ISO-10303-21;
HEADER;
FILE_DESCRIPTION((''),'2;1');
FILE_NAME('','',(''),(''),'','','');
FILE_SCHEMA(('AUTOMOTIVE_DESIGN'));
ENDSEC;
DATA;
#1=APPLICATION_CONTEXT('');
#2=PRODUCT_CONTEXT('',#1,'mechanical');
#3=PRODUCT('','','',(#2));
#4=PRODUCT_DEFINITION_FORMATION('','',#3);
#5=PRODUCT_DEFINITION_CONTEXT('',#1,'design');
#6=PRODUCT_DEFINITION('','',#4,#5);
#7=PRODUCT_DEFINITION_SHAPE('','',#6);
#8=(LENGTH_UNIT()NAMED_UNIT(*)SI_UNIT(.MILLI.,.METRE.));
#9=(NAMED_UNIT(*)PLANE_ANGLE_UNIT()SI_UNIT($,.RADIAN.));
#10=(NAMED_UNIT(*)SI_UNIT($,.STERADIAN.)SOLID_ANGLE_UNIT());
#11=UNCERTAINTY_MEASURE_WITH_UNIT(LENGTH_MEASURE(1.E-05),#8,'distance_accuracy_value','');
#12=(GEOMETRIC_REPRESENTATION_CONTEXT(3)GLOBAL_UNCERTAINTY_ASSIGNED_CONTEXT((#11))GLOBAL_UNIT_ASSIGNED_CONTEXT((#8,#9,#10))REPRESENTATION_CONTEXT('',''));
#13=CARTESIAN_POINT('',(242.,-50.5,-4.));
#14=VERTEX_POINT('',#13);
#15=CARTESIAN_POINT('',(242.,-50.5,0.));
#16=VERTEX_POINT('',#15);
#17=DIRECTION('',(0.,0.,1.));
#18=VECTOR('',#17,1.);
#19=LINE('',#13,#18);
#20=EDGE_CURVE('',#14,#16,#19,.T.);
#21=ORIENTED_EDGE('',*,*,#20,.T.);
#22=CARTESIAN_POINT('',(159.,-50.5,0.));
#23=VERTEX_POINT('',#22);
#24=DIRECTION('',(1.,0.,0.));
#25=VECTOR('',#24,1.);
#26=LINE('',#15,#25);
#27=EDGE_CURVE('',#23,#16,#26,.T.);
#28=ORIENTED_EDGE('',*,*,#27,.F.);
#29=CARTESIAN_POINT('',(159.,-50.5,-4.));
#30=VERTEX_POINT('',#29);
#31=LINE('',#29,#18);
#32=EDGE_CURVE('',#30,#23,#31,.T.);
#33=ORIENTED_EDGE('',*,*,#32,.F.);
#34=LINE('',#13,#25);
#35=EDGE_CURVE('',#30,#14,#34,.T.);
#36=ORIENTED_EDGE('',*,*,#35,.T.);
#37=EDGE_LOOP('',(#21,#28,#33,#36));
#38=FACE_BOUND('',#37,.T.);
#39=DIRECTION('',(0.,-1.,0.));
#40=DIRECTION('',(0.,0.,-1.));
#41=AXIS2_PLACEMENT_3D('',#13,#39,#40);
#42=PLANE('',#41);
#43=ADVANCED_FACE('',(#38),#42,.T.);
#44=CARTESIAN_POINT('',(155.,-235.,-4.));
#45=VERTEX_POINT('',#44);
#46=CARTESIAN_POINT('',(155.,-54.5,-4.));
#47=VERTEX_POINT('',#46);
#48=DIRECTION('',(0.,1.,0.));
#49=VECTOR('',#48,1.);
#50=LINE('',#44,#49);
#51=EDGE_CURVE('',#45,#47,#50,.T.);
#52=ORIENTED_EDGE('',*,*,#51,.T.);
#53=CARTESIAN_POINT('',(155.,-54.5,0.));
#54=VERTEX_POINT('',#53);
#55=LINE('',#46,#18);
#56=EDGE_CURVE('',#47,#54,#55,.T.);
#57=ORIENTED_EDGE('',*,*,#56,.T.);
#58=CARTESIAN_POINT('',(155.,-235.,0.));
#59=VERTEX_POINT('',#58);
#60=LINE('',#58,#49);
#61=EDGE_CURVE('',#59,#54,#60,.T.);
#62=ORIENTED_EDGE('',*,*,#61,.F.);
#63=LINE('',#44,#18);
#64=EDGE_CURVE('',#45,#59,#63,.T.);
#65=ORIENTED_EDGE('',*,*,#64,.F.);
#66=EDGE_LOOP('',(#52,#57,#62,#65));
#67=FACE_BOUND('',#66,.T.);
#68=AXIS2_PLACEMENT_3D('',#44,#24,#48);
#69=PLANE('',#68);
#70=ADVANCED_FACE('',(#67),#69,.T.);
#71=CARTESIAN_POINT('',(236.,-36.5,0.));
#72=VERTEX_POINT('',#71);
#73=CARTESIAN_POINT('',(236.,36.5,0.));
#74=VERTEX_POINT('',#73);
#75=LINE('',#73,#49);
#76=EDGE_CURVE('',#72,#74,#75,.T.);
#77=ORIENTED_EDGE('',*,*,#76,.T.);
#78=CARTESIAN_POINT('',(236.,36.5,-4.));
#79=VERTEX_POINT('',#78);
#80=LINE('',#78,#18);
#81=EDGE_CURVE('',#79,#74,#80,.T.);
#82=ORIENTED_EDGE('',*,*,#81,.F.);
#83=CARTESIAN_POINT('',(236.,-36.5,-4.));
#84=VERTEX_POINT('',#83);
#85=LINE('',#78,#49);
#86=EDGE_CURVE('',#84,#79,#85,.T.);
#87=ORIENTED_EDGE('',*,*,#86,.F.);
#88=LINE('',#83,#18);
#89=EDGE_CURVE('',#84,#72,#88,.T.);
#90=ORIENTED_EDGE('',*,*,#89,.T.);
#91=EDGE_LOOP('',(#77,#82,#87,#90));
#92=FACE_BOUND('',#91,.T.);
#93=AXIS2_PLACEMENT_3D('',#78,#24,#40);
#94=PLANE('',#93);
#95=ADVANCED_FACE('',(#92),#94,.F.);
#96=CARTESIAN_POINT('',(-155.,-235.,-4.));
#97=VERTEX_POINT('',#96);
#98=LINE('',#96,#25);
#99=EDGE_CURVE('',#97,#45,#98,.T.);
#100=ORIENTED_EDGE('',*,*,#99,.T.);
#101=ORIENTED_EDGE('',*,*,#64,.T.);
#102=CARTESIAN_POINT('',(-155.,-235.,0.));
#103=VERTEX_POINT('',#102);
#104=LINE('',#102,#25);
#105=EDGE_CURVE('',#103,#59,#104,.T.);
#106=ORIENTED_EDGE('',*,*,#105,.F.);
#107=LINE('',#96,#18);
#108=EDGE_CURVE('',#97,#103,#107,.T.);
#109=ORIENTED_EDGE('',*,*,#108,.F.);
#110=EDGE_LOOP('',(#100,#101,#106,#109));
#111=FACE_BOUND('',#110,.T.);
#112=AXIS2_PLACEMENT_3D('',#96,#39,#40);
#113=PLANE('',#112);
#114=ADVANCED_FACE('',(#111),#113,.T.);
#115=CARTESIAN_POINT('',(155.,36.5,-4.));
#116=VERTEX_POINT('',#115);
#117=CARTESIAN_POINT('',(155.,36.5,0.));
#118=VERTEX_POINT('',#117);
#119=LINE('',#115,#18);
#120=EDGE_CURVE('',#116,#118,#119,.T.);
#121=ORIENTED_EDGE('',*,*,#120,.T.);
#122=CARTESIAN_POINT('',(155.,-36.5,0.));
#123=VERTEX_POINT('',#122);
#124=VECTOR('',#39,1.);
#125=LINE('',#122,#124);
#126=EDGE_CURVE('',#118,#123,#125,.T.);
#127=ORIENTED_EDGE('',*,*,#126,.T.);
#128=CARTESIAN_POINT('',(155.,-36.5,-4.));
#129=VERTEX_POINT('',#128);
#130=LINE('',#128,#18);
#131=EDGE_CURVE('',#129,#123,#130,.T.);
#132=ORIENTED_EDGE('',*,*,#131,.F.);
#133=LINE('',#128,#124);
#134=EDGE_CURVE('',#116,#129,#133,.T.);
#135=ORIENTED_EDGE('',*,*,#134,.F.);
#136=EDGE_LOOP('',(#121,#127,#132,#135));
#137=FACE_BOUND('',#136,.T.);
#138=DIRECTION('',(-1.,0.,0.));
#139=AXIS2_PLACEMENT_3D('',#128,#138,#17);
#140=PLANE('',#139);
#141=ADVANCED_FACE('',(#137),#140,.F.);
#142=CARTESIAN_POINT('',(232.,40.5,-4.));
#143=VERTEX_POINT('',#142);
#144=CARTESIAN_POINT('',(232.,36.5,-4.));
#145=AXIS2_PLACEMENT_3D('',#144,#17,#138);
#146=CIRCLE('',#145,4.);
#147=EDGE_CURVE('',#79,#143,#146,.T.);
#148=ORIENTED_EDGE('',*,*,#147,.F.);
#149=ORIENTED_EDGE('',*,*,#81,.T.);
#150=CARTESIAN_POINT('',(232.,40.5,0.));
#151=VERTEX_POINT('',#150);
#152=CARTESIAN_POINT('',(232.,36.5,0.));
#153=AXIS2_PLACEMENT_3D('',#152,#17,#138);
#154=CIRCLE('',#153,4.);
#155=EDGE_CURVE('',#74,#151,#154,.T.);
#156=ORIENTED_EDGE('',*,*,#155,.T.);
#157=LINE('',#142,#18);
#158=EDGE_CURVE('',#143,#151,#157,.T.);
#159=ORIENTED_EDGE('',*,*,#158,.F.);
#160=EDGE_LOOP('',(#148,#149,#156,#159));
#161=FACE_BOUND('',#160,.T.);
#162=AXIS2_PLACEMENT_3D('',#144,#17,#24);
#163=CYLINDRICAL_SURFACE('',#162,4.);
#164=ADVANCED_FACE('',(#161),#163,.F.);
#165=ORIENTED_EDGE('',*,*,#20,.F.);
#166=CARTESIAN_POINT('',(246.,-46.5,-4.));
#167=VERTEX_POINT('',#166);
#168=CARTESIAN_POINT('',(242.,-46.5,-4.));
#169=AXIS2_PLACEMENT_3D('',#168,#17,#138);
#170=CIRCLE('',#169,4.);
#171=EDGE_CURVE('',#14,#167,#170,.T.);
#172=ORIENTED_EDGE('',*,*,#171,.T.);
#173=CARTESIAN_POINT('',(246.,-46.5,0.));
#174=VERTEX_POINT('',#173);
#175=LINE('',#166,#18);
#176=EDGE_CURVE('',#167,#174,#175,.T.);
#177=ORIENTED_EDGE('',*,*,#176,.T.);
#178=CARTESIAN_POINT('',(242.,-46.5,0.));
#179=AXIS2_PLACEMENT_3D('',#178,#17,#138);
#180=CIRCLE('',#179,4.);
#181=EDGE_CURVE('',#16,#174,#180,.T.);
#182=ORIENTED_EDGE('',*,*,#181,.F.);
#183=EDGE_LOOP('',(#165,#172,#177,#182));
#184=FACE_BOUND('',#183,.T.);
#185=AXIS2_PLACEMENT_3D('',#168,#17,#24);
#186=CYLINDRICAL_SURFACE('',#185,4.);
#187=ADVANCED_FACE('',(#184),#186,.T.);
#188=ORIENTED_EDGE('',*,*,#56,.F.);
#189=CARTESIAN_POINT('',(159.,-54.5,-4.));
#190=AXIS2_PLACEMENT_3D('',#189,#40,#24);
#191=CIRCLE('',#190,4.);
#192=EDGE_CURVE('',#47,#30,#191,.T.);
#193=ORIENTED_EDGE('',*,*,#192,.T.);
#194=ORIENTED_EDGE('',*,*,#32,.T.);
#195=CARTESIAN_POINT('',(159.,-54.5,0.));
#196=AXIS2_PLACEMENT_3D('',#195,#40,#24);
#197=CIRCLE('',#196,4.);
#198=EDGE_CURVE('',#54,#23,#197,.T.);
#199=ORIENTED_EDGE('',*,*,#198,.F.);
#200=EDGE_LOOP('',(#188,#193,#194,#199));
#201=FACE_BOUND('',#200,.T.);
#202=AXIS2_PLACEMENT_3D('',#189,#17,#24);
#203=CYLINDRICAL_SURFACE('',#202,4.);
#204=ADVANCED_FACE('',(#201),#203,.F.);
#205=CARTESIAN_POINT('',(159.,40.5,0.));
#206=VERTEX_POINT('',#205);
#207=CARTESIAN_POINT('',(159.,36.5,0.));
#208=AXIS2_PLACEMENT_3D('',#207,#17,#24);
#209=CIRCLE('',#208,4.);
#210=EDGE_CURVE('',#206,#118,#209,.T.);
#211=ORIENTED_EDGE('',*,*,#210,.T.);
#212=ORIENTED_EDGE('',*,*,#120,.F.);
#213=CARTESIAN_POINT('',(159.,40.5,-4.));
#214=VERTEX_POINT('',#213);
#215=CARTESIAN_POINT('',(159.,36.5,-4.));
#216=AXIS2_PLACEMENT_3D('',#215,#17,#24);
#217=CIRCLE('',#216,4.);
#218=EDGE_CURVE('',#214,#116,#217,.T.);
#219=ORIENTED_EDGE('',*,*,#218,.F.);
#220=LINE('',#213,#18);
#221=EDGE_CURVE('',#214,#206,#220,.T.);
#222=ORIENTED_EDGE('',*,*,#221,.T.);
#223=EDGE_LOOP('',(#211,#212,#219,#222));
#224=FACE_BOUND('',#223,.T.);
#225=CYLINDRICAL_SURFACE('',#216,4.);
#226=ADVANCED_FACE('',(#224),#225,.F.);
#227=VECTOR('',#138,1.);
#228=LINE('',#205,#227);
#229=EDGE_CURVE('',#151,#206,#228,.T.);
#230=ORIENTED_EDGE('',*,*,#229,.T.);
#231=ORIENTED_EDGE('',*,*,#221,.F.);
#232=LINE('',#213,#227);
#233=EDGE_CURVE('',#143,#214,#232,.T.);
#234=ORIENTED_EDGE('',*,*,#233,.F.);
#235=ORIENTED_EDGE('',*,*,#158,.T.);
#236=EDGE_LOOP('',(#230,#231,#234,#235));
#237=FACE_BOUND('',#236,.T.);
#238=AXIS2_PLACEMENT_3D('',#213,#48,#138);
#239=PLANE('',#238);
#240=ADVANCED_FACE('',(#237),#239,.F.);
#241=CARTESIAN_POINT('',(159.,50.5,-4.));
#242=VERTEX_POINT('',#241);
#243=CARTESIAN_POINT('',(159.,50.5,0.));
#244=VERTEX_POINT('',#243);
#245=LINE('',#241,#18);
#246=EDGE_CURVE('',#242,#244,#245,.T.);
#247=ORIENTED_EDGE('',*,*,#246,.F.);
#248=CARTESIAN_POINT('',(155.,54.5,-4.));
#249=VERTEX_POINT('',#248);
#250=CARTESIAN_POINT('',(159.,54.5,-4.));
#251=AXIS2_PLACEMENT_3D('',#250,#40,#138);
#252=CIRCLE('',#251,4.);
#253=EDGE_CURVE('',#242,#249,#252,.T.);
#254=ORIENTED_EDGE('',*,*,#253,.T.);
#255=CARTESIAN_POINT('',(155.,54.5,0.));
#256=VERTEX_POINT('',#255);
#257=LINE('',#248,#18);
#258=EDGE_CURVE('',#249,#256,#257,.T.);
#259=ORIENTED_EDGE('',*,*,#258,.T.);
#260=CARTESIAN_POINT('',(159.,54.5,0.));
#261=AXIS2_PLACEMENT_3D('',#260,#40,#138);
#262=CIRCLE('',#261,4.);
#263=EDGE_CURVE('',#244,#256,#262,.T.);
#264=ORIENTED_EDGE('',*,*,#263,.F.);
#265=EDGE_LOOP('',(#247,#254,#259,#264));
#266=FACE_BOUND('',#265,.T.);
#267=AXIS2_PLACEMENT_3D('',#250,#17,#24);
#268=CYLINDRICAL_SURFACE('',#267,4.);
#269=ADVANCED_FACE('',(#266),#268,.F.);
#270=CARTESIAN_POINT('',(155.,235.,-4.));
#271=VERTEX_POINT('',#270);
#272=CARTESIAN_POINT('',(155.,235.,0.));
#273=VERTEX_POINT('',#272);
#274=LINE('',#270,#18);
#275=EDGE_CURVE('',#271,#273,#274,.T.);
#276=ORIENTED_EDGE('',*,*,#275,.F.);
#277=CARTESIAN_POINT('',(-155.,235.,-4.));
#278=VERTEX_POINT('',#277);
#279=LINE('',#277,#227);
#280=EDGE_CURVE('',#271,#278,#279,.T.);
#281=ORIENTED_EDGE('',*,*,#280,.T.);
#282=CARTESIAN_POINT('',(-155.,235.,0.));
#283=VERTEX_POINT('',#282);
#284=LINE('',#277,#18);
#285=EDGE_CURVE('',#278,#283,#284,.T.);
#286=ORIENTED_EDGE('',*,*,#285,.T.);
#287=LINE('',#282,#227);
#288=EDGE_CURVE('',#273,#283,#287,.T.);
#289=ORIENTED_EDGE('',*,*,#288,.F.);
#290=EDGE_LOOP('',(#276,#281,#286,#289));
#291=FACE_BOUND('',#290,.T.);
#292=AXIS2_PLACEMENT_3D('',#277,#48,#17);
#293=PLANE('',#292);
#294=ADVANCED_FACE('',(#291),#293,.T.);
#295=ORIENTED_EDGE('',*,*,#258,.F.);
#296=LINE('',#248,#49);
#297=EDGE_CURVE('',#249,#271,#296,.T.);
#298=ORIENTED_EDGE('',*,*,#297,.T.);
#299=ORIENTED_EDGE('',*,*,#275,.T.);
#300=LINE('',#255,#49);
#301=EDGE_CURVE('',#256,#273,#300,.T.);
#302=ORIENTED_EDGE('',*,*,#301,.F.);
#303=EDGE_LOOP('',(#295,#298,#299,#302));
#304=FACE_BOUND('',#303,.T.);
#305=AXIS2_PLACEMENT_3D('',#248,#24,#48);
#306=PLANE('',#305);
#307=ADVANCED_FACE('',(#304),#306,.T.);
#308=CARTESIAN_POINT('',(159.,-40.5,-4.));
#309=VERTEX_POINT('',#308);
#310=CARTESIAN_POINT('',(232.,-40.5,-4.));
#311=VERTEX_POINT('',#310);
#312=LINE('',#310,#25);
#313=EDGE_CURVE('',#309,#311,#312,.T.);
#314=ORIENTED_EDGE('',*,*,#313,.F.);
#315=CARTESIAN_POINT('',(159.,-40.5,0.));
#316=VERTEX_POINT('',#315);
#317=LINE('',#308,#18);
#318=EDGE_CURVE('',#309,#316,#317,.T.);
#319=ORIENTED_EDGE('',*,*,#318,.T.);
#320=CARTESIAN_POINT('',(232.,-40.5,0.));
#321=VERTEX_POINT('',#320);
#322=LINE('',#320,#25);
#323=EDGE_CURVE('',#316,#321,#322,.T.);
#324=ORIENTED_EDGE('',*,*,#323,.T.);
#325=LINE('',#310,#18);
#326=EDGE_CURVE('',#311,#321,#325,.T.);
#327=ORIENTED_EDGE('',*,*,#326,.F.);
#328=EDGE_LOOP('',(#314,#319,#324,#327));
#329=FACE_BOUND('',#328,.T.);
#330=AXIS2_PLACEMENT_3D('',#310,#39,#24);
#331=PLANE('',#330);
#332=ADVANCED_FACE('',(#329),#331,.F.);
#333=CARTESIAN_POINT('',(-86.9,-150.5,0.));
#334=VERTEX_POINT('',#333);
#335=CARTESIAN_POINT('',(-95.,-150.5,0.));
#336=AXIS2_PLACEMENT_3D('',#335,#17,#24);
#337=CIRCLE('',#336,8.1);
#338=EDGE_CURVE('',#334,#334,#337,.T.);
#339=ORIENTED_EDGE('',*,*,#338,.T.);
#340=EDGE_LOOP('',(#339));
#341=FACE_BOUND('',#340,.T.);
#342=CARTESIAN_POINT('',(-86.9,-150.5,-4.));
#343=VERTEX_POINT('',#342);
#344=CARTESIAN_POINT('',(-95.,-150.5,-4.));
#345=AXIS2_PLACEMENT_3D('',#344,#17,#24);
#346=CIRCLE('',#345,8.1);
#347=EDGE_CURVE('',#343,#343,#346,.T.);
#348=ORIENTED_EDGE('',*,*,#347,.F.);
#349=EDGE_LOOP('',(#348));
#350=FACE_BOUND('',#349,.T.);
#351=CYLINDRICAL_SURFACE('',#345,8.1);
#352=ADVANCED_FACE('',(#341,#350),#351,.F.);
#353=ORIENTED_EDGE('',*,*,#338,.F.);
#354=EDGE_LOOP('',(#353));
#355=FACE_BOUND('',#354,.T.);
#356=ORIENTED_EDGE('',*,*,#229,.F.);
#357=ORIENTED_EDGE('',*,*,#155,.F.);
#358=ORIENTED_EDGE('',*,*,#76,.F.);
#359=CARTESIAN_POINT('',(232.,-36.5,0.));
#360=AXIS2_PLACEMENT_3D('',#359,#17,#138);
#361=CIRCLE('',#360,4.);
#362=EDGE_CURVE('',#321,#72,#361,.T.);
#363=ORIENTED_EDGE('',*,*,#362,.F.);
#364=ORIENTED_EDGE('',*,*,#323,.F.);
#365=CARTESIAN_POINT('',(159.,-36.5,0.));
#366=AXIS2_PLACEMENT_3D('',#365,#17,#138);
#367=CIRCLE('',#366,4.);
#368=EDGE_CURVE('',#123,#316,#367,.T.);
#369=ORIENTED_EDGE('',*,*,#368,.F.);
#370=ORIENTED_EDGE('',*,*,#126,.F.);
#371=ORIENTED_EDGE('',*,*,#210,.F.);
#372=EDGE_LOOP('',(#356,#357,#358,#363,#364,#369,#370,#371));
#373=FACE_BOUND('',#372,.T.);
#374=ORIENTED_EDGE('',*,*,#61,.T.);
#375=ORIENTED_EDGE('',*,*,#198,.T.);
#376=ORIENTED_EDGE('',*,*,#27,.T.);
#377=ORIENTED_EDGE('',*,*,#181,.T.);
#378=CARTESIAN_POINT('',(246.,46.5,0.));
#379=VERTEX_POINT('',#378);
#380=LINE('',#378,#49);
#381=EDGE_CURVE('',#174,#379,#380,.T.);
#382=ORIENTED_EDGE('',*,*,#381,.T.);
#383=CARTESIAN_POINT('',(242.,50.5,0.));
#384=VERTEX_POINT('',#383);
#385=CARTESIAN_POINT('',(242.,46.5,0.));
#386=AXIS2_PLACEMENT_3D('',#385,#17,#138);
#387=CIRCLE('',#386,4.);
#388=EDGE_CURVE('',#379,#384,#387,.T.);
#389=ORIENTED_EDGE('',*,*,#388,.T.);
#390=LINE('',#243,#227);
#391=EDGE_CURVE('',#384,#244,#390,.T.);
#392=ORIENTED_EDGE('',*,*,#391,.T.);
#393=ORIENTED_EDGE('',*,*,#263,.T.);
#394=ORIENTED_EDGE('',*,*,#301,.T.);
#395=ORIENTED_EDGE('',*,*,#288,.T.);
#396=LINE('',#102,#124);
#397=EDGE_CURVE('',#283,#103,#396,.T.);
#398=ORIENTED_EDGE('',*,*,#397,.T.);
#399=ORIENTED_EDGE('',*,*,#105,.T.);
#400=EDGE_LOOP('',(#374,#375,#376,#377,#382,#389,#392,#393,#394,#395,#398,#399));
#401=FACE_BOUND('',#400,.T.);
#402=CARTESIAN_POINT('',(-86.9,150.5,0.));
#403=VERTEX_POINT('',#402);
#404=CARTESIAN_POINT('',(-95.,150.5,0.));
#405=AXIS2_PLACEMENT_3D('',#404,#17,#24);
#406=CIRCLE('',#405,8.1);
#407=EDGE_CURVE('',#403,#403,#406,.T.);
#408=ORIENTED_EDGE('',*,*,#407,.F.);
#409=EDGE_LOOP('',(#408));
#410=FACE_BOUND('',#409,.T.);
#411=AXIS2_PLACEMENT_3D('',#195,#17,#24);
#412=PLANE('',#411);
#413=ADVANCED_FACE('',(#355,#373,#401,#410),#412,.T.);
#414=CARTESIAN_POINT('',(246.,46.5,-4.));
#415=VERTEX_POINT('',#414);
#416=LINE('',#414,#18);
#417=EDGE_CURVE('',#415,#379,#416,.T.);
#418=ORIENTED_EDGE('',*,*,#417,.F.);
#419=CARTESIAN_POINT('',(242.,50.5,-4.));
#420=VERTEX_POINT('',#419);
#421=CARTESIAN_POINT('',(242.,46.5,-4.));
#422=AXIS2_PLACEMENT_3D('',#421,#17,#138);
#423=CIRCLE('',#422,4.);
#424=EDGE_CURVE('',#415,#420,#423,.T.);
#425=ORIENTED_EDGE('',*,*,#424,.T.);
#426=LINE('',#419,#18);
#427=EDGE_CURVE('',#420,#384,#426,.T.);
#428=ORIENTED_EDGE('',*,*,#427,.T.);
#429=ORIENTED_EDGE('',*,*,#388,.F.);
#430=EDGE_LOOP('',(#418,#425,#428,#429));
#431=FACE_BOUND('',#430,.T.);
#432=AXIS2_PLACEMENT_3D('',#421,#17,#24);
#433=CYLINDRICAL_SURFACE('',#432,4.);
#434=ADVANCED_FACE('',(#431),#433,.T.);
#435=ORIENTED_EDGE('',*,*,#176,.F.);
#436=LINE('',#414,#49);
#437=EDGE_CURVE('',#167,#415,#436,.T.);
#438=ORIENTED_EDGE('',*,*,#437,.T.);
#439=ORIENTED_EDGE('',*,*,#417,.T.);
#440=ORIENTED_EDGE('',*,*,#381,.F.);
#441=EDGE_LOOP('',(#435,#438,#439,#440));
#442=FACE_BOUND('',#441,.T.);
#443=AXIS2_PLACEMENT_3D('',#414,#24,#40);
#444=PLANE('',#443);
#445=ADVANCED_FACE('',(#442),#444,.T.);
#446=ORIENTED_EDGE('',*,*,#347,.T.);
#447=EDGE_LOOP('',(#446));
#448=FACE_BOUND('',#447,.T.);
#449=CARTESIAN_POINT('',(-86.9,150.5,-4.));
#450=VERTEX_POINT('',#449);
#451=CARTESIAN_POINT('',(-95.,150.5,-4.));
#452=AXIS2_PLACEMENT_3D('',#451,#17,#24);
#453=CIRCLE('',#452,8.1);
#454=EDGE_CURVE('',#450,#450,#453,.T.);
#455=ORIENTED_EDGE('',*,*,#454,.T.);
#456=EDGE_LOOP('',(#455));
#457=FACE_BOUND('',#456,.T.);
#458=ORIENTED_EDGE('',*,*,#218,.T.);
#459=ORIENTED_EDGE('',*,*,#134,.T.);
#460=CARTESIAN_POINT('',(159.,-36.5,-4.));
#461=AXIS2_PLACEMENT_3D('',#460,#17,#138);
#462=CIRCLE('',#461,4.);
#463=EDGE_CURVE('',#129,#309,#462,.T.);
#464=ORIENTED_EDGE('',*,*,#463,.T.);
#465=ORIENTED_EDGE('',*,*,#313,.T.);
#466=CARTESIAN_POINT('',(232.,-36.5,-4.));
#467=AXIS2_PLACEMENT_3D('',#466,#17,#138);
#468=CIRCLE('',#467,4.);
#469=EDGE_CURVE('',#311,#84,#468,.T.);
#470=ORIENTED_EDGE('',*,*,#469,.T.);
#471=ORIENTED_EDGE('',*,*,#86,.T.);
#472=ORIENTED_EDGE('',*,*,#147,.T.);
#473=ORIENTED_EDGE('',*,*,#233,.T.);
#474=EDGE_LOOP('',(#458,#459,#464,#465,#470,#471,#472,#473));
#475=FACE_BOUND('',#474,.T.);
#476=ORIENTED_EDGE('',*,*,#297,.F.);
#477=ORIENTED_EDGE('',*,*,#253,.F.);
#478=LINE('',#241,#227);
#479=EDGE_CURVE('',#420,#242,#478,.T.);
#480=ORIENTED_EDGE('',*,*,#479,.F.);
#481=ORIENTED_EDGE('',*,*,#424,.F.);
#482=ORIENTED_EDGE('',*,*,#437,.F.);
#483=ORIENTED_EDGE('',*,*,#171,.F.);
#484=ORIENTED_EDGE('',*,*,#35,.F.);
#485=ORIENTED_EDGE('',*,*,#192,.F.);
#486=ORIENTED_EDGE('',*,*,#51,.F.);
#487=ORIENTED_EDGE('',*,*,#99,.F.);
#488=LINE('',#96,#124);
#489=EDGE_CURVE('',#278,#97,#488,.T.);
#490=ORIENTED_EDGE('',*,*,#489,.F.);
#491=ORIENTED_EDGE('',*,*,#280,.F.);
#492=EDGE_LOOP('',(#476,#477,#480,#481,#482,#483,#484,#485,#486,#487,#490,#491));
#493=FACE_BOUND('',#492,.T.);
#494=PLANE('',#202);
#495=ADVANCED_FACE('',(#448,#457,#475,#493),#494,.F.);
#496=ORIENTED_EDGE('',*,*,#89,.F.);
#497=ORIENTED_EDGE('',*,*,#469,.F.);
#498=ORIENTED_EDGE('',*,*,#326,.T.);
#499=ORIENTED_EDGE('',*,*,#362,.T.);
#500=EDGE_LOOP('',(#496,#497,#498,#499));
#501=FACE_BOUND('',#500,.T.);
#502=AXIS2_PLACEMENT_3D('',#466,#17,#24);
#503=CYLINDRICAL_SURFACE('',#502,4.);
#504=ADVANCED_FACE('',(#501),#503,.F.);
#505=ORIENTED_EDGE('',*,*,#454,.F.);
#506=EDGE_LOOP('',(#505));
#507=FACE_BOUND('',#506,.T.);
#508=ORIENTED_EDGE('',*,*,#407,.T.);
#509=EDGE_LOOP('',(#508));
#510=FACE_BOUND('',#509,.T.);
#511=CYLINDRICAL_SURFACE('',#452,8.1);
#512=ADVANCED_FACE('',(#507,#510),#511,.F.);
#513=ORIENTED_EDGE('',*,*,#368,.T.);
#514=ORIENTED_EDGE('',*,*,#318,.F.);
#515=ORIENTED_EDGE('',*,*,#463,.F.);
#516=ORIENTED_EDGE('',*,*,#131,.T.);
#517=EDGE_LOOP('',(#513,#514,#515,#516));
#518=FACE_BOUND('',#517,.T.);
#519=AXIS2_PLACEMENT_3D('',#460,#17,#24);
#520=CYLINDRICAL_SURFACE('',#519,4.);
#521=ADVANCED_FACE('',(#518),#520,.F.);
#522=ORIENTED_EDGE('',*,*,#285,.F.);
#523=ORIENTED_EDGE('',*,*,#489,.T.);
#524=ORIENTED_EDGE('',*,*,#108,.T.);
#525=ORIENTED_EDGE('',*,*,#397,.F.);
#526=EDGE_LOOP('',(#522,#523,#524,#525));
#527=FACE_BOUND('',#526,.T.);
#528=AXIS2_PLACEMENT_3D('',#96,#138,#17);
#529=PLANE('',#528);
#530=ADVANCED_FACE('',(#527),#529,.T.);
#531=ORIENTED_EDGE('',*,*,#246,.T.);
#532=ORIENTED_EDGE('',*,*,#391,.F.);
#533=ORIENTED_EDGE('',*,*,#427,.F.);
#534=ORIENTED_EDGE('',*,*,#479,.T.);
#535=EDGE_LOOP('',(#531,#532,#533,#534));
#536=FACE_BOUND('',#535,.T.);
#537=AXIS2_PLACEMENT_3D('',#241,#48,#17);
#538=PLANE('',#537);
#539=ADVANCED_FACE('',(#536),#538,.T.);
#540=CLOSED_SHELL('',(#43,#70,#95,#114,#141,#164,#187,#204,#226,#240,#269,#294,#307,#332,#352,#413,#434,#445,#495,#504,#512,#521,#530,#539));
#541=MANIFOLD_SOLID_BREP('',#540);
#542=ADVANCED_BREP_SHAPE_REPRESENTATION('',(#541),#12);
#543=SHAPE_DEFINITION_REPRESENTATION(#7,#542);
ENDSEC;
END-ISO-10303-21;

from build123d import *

# Parameters (mm, degrees)
SKETCH9_R          = 8.1
BASE_FLANGE2_DEPTH = 4


# Sheet-metal steps are written as plain solids
with BuildPart() as part:
    # Sketch9 → Base-Flange2 (new body)
    with BuildSketch(Plane.XY):
        with BuildLine():
            Line((-155, -235), (155, -235))
            Line((155, -235), (155, -54.5))
            ThreePointArc((155, -54.5), (156.171572875, -51.671572875), (159, -50.5))
            Line((159, -50.5), (242, -50.5))
            ThreePointArc((242, -50.5), (244.828427125, -49.328427125), (246, -46.5))
            Line((246, -46.5), (246, 46.5))
            ThreePointArc((246, 46.5), (244.828427125, 49.328427125), (242, 50.5))
            Line((242, 50.5), (159, 50.5))
            ThreePointArc((159, 50.5), (156.171572875, 51.671572875), (155, 54.5))
            Line((155, 54.5), (155, 235))
            Line((155, 235), (-155, 235))
            Line((-155, 235), (-155, -235))
        make_face()
        with Locations((-95, 150.5)):
            Circle(SKETCH9_R, mode=Mode.SUBTRACT)
        with Locations((-95, -150.5)):
            Circle(SKETCH9_R, mode=Mode.SUBTRACT)
        with BuildLine():
            Line((159, 40.5), (232, 40.5))
            ThreePointArc((232, 40.5), (234.828427125, 39.328427125), (236, 36.5))
            Line((236, 36.5), (236, -36.5))
            ThreePointArc((236, -36.5), (234.828427125, -39.328427125), (232, -40.5))
            Line((232, -40.5), (159, -40.5))
            ThreePointArc((159, -40.5), (156.171572875, -39.328427125), (155, -36.5))
            Line((155, -36.5), (155, 36.5))
            ThreePointArc((155, 36.5), (156.171572875, 39.328427125), (159, 40.5))
        make_face(mode=Mode.SUBTRACT)
    extrude(amount=-BASE_FLANGE2_DEPTH)


solid = part.part
